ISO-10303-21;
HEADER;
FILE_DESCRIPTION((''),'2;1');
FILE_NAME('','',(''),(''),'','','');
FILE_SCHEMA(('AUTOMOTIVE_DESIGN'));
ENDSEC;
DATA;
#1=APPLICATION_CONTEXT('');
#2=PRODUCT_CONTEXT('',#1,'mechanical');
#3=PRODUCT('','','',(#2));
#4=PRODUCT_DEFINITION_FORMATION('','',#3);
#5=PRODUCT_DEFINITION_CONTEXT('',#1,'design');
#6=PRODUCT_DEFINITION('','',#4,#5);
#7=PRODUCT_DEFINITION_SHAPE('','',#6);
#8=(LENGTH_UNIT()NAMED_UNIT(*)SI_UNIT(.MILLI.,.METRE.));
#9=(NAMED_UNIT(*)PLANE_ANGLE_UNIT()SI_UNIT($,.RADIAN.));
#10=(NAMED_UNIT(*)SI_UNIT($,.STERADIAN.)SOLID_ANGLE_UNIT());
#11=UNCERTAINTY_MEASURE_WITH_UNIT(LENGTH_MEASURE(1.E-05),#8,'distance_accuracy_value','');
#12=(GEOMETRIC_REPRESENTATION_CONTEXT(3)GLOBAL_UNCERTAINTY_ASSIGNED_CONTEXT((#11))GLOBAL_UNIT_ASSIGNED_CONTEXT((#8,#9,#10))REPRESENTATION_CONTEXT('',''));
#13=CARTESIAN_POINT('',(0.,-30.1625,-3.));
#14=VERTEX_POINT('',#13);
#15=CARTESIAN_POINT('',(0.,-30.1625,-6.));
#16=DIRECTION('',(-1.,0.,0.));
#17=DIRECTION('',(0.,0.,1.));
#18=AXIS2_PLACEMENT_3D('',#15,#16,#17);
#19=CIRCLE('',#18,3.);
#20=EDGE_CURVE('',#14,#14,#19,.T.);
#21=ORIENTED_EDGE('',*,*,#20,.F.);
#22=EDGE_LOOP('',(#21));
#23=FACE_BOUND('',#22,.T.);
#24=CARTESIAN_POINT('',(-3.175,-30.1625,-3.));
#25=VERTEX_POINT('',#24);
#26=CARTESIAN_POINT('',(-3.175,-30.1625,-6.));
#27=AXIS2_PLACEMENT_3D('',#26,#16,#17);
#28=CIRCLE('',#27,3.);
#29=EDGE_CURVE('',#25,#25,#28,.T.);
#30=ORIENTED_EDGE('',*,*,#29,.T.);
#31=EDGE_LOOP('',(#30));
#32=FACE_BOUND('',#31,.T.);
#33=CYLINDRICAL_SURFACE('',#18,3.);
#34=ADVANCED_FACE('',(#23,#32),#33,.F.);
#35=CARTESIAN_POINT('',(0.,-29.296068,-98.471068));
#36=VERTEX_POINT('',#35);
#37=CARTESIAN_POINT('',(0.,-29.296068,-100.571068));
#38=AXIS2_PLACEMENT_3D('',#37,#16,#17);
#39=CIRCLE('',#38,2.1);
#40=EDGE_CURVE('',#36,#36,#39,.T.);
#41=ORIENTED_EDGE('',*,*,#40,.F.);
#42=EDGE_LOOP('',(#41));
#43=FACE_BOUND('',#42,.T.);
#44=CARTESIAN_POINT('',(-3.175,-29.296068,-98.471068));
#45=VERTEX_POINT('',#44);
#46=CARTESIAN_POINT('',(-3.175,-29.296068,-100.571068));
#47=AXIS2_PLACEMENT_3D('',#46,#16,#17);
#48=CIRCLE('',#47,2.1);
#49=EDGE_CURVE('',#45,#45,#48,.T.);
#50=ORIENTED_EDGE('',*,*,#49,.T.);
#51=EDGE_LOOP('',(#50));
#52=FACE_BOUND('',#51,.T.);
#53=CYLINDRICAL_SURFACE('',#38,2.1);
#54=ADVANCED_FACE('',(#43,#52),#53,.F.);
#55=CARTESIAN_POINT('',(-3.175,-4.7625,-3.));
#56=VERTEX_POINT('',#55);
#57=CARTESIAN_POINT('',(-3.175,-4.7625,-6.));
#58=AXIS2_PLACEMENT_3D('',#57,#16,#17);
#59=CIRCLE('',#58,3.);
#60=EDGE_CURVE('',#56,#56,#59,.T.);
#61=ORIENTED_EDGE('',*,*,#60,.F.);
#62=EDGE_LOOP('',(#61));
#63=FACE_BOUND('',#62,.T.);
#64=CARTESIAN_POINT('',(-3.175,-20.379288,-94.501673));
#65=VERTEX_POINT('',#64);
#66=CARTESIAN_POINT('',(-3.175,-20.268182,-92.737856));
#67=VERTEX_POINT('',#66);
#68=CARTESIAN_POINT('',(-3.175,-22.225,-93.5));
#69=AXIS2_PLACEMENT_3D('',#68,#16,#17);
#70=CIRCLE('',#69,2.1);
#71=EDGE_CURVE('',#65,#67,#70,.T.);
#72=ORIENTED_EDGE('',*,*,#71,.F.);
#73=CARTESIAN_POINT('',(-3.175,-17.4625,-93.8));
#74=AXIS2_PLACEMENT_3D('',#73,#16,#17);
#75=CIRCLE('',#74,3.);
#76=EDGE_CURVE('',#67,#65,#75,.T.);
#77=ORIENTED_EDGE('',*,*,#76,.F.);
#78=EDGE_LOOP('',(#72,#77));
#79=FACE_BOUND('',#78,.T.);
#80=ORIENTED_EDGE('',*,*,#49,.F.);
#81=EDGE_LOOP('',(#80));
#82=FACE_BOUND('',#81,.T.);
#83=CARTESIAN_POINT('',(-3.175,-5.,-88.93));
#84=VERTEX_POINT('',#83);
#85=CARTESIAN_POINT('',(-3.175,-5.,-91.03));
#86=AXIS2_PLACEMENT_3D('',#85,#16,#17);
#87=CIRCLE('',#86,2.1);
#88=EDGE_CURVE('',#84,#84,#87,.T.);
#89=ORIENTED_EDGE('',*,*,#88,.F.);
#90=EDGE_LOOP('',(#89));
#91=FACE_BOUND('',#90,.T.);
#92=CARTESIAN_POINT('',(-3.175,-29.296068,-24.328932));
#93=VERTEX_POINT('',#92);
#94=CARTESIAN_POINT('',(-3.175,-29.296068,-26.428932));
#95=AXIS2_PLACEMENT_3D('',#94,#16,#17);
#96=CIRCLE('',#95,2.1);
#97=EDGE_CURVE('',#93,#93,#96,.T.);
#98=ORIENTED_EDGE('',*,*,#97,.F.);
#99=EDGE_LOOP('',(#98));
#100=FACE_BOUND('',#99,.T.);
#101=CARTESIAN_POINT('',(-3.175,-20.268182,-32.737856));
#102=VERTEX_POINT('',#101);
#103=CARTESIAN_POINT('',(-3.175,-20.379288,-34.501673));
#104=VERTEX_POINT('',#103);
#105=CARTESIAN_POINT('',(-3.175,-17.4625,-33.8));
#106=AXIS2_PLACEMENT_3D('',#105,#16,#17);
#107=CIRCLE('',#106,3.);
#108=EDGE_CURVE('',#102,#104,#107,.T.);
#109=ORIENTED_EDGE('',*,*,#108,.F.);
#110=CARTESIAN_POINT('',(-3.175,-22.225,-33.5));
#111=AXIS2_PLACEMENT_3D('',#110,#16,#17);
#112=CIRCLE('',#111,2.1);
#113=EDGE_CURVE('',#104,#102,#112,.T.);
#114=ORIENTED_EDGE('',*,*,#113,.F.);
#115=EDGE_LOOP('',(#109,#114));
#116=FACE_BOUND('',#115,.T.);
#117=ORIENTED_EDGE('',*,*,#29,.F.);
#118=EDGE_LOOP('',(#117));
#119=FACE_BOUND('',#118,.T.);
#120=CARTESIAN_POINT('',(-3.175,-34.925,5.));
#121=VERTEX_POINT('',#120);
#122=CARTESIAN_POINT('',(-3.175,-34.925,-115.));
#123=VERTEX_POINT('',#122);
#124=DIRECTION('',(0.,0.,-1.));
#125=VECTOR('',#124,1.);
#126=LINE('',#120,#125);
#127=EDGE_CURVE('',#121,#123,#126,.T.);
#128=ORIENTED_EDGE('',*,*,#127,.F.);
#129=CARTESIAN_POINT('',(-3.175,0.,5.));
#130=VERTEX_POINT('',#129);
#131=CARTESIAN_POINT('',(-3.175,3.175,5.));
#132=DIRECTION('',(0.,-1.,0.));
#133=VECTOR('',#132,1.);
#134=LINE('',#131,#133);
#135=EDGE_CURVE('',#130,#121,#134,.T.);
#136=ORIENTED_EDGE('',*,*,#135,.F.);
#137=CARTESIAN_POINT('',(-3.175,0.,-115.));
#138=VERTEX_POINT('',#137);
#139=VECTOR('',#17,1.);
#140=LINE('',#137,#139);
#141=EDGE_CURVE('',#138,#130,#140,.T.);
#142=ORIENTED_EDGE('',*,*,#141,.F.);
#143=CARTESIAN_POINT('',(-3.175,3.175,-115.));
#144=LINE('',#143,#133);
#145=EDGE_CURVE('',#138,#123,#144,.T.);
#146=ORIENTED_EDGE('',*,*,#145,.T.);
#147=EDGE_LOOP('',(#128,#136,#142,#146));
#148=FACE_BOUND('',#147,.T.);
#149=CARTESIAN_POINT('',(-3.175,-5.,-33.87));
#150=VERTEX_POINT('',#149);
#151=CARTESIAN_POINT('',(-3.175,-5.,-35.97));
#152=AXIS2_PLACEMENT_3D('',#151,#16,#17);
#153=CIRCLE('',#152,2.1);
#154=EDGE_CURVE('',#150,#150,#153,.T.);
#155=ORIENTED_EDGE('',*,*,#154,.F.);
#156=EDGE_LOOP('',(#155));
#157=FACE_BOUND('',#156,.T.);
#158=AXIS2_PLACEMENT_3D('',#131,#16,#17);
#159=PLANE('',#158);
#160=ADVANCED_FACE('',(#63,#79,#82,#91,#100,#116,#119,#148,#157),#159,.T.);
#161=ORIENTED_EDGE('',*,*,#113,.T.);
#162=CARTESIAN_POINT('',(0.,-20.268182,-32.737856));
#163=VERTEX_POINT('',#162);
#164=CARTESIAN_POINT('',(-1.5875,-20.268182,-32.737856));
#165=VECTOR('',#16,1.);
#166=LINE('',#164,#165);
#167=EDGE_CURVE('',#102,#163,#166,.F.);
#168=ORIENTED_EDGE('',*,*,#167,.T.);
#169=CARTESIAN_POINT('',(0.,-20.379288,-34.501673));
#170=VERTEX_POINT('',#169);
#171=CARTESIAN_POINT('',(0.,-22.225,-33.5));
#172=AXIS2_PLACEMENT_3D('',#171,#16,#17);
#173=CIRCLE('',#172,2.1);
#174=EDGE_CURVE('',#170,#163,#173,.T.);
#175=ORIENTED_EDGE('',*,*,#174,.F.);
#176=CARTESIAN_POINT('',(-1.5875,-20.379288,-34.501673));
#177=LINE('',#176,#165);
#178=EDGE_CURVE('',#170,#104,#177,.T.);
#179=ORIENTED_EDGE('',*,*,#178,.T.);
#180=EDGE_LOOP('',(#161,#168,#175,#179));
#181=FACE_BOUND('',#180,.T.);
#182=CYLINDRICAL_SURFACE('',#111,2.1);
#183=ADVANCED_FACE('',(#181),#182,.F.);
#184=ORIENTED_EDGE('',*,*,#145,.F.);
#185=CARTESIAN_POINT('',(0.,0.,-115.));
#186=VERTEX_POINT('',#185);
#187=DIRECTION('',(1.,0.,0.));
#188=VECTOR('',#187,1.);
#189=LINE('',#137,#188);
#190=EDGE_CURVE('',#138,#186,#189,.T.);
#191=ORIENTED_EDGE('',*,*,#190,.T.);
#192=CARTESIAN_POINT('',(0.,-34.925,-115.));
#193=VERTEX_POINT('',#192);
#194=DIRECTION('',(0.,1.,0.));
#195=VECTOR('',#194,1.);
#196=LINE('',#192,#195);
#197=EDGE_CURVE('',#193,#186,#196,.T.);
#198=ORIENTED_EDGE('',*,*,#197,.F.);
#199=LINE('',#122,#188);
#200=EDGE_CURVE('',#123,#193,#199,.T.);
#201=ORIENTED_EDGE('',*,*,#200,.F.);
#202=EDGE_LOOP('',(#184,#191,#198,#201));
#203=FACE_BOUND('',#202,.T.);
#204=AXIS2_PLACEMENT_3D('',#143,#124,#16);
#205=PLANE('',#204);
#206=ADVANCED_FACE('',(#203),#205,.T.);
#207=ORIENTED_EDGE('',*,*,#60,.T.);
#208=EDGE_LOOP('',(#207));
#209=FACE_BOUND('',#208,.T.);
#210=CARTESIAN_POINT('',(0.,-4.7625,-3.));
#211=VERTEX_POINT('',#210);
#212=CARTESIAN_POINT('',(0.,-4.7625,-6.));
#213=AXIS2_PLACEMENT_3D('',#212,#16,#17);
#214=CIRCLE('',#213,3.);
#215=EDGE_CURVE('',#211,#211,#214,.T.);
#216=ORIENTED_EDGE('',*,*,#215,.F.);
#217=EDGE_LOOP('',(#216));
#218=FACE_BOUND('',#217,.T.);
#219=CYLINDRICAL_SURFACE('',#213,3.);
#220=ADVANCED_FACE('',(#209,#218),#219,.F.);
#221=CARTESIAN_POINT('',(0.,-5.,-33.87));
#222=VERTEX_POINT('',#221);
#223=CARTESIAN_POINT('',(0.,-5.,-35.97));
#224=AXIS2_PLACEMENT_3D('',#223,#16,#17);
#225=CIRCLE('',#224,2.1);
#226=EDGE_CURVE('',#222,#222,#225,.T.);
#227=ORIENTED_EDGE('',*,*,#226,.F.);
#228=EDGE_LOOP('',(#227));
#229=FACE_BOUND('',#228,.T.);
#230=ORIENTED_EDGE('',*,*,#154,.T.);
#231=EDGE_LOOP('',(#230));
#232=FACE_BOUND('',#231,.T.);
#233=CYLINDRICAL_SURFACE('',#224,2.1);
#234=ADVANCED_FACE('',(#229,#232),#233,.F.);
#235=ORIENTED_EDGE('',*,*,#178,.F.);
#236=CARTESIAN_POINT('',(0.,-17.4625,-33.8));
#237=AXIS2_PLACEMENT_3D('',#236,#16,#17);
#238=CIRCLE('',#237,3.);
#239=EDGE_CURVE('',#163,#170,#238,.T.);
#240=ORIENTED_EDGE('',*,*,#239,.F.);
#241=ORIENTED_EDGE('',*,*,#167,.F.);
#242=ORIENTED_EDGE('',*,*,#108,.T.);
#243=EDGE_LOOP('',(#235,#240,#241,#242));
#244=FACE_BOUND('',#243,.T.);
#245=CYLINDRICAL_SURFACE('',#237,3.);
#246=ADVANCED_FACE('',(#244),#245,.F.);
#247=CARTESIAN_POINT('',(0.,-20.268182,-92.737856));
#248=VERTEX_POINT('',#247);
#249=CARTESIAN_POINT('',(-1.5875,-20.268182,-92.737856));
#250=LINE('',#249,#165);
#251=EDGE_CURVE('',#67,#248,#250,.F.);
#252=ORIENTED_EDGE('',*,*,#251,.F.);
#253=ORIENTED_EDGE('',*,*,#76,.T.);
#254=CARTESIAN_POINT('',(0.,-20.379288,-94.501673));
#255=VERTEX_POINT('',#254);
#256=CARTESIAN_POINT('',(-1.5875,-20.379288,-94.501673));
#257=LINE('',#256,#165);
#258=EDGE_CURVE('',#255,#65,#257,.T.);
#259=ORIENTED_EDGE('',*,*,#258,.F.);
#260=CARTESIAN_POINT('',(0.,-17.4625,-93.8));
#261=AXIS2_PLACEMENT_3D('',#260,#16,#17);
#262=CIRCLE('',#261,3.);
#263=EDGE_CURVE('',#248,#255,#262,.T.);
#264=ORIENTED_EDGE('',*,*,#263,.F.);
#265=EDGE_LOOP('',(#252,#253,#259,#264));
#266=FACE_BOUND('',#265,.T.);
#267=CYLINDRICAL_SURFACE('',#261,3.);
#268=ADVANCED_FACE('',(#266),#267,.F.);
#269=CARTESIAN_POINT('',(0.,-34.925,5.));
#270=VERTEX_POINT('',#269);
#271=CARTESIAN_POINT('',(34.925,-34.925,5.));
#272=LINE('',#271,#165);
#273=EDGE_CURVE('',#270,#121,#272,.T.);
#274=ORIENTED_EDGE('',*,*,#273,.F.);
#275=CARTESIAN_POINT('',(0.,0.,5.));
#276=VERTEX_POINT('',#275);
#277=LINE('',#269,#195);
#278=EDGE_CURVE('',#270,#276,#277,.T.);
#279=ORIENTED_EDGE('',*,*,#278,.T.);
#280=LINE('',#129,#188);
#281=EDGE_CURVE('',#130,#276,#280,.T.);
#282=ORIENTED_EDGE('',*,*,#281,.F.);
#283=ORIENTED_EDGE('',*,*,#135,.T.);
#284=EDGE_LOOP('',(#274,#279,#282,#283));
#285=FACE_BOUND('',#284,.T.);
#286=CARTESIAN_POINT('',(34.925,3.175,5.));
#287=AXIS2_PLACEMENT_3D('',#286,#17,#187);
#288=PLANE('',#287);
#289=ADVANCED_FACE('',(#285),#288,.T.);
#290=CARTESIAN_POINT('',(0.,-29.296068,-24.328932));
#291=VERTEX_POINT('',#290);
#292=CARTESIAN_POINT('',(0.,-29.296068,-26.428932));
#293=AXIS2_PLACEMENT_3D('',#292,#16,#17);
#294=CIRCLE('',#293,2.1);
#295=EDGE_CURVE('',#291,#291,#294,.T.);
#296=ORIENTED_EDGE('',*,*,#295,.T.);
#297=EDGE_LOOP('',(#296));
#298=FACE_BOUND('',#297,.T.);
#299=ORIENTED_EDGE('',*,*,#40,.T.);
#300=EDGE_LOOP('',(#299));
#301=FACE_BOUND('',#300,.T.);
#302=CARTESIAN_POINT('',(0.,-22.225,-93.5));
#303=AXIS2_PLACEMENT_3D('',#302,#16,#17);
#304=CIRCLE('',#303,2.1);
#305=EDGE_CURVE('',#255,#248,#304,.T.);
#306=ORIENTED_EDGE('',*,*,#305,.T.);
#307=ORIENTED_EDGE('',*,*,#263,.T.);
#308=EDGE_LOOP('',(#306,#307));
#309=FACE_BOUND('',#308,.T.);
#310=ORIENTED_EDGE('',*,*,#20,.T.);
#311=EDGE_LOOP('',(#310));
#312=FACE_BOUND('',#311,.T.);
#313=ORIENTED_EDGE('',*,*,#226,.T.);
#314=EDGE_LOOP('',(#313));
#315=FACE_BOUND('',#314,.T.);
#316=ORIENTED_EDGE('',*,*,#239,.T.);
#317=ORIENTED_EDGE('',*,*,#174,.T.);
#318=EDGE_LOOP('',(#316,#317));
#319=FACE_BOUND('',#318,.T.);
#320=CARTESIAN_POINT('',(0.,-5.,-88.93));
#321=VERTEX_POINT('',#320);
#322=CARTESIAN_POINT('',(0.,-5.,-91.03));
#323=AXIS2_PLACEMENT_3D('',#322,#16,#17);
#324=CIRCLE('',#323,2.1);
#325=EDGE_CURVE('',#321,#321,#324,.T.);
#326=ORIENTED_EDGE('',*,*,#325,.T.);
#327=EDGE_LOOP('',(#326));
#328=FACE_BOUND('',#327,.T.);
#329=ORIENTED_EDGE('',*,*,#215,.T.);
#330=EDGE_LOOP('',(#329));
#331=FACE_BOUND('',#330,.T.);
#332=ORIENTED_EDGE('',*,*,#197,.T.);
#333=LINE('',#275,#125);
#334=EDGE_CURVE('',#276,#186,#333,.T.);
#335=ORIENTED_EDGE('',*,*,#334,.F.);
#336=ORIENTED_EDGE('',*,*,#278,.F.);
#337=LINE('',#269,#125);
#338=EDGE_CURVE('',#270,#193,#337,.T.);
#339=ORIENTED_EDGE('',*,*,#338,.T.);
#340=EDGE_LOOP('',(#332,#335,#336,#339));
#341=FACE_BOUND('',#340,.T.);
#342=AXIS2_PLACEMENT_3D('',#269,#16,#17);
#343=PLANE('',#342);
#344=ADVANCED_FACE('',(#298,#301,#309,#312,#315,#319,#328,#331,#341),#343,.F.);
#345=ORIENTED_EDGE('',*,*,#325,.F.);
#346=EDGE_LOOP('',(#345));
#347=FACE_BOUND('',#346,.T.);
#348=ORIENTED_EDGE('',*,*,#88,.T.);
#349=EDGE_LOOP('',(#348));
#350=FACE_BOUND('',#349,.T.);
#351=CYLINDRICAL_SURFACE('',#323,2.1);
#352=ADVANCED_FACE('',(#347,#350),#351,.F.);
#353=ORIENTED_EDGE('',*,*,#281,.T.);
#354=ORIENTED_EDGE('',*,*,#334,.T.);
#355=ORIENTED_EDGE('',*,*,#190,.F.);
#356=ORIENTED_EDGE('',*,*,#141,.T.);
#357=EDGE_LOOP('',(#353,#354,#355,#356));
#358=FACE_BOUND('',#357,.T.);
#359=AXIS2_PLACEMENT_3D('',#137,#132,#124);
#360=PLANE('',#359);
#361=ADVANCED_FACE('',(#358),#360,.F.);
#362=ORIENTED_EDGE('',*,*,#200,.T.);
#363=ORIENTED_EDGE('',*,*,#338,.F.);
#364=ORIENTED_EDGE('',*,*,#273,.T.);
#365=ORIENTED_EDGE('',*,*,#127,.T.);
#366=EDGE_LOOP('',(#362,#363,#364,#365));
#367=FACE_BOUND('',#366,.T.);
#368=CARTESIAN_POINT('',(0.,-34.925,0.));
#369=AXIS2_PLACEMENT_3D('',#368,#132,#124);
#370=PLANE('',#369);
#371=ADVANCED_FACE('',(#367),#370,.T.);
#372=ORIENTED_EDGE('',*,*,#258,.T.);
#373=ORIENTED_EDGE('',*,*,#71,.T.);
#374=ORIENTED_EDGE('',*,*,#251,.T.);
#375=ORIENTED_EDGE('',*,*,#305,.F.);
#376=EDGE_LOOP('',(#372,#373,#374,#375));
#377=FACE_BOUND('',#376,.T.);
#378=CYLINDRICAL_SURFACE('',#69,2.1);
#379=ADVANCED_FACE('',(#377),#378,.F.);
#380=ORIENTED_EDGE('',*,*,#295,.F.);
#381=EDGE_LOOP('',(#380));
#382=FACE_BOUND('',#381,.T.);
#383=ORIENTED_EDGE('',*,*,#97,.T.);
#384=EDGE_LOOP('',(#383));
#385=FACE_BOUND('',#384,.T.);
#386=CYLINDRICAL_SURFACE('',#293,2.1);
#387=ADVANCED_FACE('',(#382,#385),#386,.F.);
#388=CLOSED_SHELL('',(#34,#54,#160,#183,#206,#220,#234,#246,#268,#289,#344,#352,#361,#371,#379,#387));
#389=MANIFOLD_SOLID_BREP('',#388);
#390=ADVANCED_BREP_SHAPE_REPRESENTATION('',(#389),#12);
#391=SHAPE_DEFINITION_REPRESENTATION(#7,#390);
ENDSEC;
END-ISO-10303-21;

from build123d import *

# Parameters (mm, degrees)
SKETCH1_W                      = 38.1
SKETCH1_H                      = 120
BOSS_EXTRUDE1_DEPTH            = 38.1
SKETCH2_W                      = 34.925
SKETCH2_H                      = 34.925
CUT_EXTRUDE1_DEPTH             = 130.767142413
F_4_2_4_2_DIAMETER_HOLE1_D     = 4.2
F_6_0_6_DIAMETER_HOLE1_D       = 6
F_4_2_4_2_DIAMETER_HOLE2_D     = 4.2
F_4_2_4_2_DIAMETER_HOLE2_DEPTH = 38.1
F_6_0_6_DIAMETER_HOLE2_D       = 6
F_6_0_6_DIAMETER_HOLE2_DEPTH   = 38.1
F_6_0_6_DIAMETER_HOLE3_D       = 6
F_6_0_6_DIAMETER_HOLE3_DEPTH   = 38.1
F_4_2_4_2_DIAMETER_HOLE3_D     = 4.2
SKETCH15_R                     = 2.1
SKETCH15_R_2                   = 3
BOSS_EXTRUDE2_DEPTH            = 3.175
BOSS_EXTRUDE3_START            = -3.175
SKETCH16_R                     = 2.1
BOSS_EXTRUDE3_DEPTH            = 3.175
SKETCH18_W                     = 3.175
SKETCH18_H                     = 3.175
CUT_EXTRUDE2_DEPTH             = 130.767142413
CUT_EXTRUDE3_START             = -3.175
CUT_EXTRUDE3_OUTLINE_R         = 2.1
CUT_EXTRUDE3_DEPTH             = 3.175
BOSS_EXTRUDE4_START            = -3.175
BOSS_EXTRUDE4_OUTLINE_R        = 3
BOSS_EXTRUDE4_DEPTH            = 3.175
SKETCH19_R                     = 3
CUT_EXTRUDE4_DEPTH             = 121.228267267


# Read off the part's stored shape, not the designer's step: Cut-Extrude3, Boss-Extrude4
with BuildPart() as part:
    # Sketch1 → Boss-Extrude1 (new body)
    with BuildSketch(Plane.XZ.offset(34.925)):
        with Locations((15.875, -55)):
            Rectangle(SKETCH1_W, SKETCH1_H)
    extrude(amount=-BOSS_EXTRUDE1_DEPTH)

    # Sketch2 → Cut-Extrude1 (cut, through all)
    with BuildSketch(Plane(origin=(0, 0, -115), x_dir=(-1, 0, 0), z_dir=(0, 0, -1))):
        with Locations((-17.4625, -17.4625)):
            Rectangle(SKETCH2_W, SKETCH2_H)
    extrude(amount=-CUT_EXTRUDE1_DEPTH, mode=Mode.SUBTRACT)

    # Ø4.2 (4.2) Diameter Hole1 (through all)
    with Locations(Plane(origin=(0, 0, 0), x_dir=(-1, 0, 0), z_dir=(0, -1, 0))):
        with Locations((-5, 35.97), (-5, 91.03)):
            Hole(F_4_2_4_2_DIAMETER_HOLE1_D / 2)

    # Ø6.0 (6) Diameter Hole1 (through all)
    with Locations(Plane(origin=(0, 0, 0), x_dir=(-1, 0, 0), z_dir=(0, -1, 0))):
        with Locations((-22.225, 106.5), (-22.225, 46.5)):
            Hole(F_6_0_6_DIAMETER_HOLE1_D / 2)

    # Ø4.2 (4.2) Diameter Hole2
    with Locations(Plane(origin=(0, 3.175, 0), x_dir=(1, 0, 0), z_dir=(0, 1, 0))):
        with Locations((22.225, 33.5), (22.225, 93.5), (29.296067812, 100.571067812), (29.296067812, 26.428932188)):
            Hole(F_4_2_4_2_DIAMETER_HOLE2_D / 2, depth=F_4_2_4_2_DIAMETER_HOLE2_DEPTH)

    # Ø6.0 (6) Diameter Hole2
    with Locations(Plane(origin=(0, 3.175, 0), x_dir=(1, 0, 0), z_dir=(0, 1, 0))):
        with Locations((24.925, 6)):
            Hole(F_6_0_6_DIAMETER_HOLE2_D / 2, depth=F_6_0_6_DIAMETER_HOLE2_DEPTH)

    # Ø6.0 (6) Diameter Hole3
    with Locations(Plane.ZY.offset(3.175)):
        with Locations((-6, -24.925), (-106.5, -22.225), (-46.5, -22.225)):
            Hole(F_6_0_6_DIAMETER_HOLE3_D / 2, depth=F_6_0_6_DIAMETER_HOLE3_DEPTH)

    # Ø4.2 (4.2) Diameter Hole3 (through all)
    with Locations(Plane.ZY.offset(3.175)):
        with Locations((-93.5, -22.225), (-33.5, -22.225), (-35.97, -5), (-91.03, -5), (-100.571067812, -29.296067812), (-26.428932188, -29.296067812)):
            Hole(F_4_2_4_2_DIAMETER_HOLE3_D / 2)

    # Sketch15 → Boss-Extrude2 (add)
    with BuildSketch(Plane(origin=(0, 3.175, 0), x_dir=(1, 0, 0), z_dir=(0, 1, 0))):
        with Locations((29.296067812, 26.428932188)):
            Circle(SKETCH15_R)
        with Locations((29.296067812, 100.571067812)):
            Circle(SKETCH15_R)
        with Locations((22.225, 106.5)):
            Circle(SKETCH15_R_2)
        with Locations((22.225, 46.5)):
            Circle(SKETCH15_R_2)
        with Locations((5, 35.97)):
            Circle(SKETCH15_R)
        with Locations((5, 91.03)):
            Circle(SKETCH15_R)
    extrude(amount=-BOSS_EXTRUDE2_DEPTH)

    # Sketch16 → Boss-Extrude3 (add)
    with BuildSketch(Plane.ZY.offset(3.175).offset(BOSS_EXTRUDE3_START)):
        with Locations((-100.571067812, -29.296067812)):
            Circle(SKETCH16_R)
        with Locations((-26.428932188, -29.296067812)):
            Circle(SKETCH16_R)
        with Locations((-35.97, -5)):
            Circle(SKETCH16_R)
        with Locations((-91.03, -5)):
            Circle(SKETCH16_R)
    extrude(amount=BOSS_EXTRUDE3_DEPTH)

    # Sketch18 → Cut-Extrude2 (cut, through all)
    with BuildSketch(Plane.XY.offset(5)):
        with Locations((-1.5875, 1.5875)):
            Rectangle(SKETCH18_W, SKETCH18_H)
    extrude(amount=-CUT_EXTRUDE2_DEPTH, mode=Mode.SUBTRACT)


with BuildPart() as body_2:
    # of the pieces the cut leaves, the one that is kept (cut_extrude2_keep)
    add(part.part.solids().sort_by_distance((-3.175, -34.925, -115))[0])

    # Cut-Extrude3 outline → Cut-Extrude3 (cut)
    with BuildSketch(Plane.YZ.offset(CUT_EXTRUDE3_START)):
        with Locations((-5, -91.03)):
            Circle(CUT_EXTRUDE3_OUTLINE_R)
        with Locations((-5, -35.97)):
            Circle(CUT_EXTRUDE3_OUTLINE_R)
        with Locations((-29.296067812, -26.428932188)):
            Circle(CUT_EXTRUDE3_OUTLINE_R)
        with Locations((-29.296067812, -100.571067812)):
            Circle(CUT_EXTRUDE3_OUTLINE_R)
    extrude(amount=CUT_EXTRUDE3_DEPTH, mode=Mode.SUBTRACT)

    # Boss-Extrude4 outline → Boss-Extrude4 (add)
    with BuildSketch(Plane.YZ.offset(BOSS_EXTRUDE4_START)):
        with Locations((-22.225, -46.5)):
            Circle(BOSS_EXTRUDE4_OUTLINE_R)
        with Locations((-22.225, -106.5)):
            Circle(BOSS_EXTRUDE4_OUTLINE_R)
        with Locations((-24.925, -6)):
            Circle(BOSS_EXTRUDE4_OUTLINE_R)
    extrude(amount=BOSS_EXTRUDE4_DEPTH)

    # Sketch19 → Cut-Extrude4 (cut, through all)
    with BuildSketch(Plane.ZY.offset(3.175)):
        with Locations((-93.8, -17.4625)):
            Circle(SKETCH19_R)
        with Locations((-33.8, -17.4625)):
            Circle(SKETCH19_R)
        with Locations((-6, -4.7625)):
            Circle(SKETCH19_R)
        with Locations((-6, -30.1625)):
            Circle(SKETCH19_R)
    extrude(amount=-CUT_EXTRUDE4_DEPTH, mode=Mode.SUBTRACT)


solid = body_2.part
